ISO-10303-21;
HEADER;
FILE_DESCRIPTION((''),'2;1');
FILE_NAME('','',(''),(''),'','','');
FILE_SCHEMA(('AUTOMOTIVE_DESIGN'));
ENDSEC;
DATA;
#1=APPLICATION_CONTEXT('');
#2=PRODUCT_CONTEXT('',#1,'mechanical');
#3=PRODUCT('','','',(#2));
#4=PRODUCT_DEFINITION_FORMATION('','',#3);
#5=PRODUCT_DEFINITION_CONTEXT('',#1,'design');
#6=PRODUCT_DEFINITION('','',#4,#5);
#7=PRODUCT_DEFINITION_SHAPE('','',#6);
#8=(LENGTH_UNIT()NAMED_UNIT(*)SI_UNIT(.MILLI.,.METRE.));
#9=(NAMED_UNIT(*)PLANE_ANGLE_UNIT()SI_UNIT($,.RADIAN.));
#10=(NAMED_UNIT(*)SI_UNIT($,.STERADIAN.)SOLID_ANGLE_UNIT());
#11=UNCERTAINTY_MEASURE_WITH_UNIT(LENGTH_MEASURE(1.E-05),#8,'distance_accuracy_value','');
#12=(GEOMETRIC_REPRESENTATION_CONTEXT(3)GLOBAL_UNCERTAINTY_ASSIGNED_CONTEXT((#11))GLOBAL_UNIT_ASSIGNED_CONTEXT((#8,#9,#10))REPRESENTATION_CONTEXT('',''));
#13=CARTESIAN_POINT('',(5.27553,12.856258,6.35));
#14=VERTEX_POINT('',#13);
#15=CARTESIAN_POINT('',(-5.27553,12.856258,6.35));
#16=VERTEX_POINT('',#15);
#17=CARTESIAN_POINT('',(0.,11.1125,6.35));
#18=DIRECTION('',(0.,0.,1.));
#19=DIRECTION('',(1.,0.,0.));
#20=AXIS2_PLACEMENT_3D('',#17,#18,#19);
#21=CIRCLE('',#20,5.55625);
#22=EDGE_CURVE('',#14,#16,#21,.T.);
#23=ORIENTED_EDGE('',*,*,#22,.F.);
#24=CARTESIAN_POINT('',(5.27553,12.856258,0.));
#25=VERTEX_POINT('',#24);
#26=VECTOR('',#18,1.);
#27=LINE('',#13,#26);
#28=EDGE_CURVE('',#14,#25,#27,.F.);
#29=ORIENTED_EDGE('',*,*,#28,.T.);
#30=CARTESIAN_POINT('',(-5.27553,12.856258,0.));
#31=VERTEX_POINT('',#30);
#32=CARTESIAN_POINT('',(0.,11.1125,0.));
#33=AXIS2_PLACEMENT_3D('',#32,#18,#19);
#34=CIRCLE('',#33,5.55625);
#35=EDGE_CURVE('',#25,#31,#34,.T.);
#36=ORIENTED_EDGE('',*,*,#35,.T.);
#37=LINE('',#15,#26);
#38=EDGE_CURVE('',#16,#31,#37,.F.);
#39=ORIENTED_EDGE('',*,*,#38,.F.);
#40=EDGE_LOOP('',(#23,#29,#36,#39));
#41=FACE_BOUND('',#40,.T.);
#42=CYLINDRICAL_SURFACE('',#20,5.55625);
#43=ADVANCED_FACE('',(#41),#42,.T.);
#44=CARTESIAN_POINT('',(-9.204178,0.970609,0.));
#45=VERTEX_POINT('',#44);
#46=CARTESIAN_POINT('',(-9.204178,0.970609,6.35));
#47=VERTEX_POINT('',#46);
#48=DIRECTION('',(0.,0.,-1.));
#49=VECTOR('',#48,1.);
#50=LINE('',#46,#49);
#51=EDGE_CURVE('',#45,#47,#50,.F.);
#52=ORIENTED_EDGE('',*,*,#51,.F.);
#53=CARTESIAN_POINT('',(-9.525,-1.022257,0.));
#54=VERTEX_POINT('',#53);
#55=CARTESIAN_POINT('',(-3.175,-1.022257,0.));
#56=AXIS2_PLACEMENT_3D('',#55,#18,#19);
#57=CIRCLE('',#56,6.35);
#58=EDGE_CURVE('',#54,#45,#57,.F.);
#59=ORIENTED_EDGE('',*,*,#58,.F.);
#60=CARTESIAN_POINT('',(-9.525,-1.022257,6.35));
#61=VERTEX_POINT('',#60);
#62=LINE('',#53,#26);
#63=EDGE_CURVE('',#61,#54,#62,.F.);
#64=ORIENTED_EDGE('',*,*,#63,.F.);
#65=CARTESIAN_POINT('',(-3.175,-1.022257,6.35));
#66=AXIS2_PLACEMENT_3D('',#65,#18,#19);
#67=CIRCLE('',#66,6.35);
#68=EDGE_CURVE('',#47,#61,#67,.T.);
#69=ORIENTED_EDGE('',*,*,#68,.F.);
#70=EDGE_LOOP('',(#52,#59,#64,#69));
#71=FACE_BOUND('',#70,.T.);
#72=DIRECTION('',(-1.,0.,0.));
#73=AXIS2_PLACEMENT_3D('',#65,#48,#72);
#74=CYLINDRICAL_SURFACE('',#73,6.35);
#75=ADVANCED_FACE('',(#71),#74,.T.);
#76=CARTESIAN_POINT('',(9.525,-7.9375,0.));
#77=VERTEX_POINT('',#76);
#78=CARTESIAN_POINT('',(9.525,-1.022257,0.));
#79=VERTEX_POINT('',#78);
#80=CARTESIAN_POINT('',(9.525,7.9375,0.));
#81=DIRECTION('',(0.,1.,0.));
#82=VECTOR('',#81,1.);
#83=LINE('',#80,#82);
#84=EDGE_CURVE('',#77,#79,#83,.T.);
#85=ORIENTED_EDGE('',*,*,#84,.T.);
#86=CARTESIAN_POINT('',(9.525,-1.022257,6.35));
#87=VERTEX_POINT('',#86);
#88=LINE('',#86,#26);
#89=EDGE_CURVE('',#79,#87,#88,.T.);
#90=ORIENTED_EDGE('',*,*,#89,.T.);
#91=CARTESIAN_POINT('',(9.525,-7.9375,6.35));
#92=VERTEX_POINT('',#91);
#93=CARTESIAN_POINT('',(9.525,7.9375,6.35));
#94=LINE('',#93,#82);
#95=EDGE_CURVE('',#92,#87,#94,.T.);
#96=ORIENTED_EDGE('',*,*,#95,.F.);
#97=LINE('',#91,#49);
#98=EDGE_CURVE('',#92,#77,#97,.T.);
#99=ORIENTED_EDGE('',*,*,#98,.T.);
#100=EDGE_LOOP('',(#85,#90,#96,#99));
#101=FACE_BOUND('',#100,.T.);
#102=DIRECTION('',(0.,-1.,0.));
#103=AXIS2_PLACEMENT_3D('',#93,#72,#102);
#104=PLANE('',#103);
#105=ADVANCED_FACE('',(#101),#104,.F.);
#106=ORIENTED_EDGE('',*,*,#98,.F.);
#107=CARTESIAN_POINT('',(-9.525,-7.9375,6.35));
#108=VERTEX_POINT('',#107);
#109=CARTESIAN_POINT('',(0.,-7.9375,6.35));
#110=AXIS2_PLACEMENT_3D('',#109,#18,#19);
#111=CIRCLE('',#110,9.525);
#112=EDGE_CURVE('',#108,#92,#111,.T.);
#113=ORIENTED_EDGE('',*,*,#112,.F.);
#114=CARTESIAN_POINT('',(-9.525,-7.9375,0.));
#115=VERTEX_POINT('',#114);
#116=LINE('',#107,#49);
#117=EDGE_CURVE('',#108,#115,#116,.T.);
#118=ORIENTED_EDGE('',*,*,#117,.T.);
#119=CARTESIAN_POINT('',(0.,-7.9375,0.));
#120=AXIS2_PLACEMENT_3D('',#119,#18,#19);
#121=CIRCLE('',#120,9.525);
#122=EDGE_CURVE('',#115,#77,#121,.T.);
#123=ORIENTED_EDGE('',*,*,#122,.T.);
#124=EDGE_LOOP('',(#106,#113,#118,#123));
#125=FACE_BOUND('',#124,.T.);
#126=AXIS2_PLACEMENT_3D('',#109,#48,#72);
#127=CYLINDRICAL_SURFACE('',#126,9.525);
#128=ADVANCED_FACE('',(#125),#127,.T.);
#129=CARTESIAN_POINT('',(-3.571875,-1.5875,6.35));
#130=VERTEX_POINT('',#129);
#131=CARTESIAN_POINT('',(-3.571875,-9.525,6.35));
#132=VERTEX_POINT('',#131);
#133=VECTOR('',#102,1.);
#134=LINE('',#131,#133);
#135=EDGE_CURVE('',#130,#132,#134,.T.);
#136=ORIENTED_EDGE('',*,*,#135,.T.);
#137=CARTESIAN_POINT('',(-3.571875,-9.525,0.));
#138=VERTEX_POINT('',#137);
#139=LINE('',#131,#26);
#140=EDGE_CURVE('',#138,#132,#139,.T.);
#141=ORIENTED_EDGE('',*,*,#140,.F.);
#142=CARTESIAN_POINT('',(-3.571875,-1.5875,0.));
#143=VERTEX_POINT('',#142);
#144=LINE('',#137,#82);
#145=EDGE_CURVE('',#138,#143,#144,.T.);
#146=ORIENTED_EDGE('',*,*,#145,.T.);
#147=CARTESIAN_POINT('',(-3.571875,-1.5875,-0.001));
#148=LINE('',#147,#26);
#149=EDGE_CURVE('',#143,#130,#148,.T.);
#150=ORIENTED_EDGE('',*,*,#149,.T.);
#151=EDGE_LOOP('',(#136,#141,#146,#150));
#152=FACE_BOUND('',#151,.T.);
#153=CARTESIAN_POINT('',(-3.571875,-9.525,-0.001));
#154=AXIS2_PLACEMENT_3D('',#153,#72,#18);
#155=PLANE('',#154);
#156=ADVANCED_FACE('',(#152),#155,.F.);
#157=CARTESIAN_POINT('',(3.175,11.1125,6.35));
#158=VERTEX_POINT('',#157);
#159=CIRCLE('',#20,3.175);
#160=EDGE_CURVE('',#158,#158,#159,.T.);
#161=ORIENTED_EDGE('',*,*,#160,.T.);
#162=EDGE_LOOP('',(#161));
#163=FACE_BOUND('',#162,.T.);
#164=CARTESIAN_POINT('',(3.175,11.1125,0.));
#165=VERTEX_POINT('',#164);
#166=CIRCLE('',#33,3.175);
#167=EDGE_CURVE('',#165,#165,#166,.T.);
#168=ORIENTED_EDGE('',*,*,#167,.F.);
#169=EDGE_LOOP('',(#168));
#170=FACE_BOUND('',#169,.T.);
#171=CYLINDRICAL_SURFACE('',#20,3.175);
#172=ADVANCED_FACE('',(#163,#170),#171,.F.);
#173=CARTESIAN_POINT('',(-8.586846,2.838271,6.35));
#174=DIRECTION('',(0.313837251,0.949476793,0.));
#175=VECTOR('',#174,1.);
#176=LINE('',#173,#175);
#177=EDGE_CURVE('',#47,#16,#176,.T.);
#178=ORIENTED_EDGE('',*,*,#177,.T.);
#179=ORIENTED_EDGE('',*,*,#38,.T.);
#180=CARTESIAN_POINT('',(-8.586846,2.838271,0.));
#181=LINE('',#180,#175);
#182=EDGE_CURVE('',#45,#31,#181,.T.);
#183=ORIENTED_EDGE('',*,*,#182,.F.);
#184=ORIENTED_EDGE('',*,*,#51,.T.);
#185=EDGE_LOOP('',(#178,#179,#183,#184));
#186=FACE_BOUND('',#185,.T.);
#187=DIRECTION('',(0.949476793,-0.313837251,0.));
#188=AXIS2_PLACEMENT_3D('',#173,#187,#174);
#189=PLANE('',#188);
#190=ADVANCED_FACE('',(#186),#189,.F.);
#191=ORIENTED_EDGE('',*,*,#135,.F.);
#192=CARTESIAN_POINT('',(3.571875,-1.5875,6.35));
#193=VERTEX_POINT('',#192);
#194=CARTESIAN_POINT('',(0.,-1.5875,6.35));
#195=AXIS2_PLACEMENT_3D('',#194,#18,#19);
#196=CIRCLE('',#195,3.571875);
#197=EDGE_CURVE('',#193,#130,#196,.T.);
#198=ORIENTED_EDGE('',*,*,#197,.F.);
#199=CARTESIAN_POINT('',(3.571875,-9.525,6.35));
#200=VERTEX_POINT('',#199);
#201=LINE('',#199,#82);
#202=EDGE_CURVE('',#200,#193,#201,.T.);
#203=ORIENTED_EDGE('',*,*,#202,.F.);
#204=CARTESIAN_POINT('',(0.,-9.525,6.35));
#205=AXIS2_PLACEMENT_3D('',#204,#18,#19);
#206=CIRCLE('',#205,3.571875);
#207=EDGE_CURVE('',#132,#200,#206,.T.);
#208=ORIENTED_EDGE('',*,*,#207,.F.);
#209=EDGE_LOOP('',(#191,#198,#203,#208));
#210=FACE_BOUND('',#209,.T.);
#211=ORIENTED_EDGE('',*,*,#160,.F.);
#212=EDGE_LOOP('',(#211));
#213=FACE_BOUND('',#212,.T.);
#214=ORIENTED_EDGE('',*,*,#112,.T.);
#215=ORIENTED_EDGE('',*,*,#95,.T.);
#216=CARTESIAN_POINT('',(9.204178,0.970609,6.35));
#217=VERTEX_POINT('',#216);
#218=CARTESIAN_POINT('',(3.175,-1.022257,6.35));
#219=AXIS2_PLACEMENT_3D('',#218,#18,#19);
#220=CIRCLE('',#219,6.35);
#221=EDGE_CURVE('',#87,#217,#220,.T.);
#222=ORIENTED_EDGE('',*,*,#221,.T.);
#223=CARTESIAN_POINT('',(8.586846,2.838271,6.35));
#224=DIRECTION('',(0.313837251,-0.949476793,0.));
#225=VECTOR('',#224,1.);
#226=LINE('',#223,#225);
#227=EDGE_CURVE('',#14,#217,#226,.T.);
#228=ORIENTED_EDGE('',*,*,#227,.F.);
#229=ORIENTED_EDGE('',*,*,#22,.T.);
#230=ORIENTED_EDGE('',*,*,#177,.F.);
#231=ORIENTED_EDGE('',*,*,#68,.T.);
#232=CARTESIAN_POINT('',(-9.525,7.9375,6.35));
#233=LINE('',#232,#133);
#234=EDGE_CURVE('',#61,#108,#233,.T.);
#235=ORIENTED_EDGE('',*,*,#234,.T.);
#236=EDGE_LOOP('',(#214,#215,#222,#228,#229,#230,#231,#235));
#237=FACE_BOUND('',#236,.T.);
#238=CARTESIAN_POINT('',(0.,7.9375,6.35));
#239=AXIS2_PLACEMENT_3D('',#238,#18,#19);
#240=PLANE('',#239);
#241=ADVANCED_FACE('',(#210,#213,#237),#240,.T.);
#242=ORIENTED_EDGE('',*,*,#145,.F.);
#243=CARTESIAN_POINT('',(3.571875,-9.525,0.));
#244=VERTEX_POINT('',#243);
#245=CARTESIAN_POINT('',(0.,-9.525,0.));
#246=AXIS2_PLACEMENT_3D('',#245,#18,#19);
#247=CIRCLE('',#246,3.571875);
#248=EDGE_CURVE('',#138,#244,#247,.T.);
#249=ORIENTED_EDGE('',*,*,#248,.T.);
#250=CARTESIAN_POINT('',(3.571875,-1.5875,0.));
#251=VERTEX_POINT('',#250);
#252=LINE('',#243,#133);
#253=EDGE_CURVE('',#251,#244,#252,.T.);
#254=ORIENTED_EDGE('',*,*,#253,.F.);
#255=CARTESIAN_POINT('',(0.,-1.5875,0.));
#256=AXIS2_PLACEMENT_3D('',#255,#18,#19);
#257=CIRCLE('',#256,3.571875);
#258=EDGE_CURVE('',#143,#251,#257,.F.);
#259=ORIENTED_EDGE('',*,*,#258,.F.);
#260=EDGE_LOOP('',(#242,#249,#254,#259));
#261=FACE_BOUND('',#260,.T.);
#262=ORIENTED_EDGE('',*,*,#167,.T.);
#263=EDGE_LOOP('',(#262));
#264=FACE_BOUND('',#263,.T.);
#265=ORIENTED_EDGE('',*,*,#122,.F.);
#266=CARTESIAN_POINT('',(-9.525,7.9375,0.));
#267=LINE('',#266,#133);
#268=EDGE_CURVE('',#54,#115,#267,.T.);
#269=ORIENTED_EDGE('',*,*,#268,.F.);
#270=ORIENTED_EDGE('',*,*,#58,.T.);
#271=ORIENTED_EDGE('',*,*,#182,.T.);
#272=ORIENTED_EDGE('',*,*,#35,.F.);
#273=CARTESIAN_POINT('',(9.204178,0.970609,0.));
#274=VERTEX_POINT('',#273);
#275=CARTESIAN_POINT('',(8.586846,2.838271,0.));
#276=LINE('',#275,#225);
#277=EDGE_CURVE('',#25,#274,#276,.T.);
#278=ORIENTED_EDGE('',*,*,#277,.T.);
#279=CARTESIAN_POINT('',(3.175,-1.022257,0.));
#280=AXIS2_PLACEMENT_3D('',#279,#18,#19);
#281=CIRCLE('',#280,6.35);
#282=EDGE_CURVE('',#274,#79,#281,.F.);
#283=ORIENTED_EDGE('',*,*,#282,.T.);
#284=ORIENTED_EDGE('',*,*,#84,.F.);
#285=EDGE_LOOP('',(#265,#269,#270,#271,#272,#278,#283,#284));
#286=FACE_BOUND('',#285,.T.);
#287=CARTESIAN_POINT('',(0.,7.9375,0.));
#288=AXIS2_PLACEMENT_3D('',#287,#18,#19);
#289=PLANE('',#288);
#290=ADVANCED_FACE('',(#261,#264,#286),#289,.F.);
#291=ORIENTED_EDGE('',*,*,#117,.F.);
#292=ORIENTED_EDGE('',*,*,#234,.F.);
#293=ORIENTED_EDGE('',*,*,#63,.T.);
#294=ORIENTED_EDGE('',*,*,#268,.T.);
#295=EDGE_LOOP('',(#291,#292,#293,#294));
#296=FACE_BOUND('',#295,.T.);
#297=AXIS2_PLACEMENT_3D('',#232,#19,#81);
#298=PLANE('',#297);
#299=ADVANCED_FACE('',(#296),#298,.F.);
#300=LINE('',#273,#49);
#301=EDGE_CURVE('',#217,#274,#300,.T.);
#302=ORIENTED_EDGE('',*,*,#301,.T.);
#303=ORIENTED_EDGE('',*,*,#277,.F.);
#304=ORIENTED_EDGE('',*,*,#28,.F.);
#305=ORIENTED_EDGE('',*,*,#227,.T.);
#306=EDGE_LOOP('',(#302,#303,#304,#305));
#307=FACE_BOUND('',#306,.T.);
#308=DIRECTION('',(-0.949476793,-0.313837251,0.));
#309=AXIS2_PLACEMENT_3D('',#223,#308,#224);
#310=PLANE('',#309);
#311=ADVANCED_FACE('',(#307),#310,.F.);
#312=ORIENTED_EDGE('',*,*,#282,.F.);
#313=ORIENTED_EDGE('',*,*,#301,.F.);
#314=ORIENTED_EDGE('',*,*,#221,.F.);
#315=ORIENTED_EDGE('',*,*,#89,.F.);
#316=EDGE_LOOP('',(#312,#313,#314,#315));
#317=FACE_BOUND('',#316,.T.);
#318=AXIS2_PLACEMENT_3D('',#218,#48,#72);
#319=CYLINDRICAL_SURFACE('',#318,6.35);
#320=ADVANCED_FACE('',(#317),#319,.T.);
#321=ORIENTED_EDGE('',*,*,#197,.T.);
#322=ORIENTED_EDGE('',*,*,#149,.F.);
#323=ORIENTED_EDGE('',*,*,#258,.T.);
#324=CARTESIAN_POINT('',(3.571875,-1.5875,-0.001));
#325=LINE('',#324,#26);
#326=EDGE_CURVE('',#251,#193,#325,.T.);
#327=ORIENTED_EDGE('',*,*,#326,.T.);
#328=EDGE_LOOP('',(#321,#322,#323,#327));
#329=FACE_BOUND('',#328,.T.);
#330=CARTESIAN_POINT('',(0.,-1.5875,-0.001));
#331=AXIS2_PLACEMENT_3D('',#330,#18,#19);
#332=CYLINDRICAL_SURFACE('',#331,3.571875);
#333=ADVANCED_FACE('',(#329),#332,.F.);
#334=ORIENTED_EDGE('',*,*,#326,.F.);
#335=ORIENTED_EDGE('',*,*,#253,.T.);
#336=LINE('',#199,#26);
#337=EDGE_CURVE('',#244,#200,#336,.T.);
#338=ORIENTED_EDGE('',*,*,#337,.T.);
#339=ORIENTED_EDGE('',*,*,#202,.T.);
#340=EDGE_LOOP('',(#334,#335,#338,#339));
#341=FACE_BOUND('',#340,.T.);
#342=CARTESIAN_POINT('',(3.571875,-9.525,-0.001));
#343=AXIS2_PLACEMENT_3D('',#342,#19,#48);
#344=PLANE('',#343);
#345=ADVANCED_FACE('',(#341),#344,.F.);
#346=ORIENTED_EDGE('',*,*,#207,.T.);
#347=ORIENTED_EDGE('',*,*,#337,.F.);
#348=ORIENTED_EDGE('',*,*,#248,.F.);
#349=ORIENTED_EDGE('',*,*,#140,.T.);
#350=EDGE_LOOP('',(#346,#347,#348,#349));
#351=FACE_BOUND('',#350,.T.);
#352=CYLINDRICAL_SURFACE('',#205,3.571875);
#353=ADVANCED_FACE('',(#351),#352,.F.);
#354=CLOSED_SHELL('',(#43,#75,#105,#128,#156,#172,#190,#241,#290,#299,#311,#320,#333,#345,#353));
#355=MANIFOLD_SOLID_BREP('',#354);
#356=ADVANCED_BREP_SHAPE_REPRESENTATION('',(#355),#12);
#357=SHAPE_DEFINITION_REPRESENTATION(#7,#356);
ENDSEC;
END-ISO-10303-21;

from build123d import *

# Parameters (mm, degrees)
BASE_FLANGE1_DEPTH              = 6.35
F_1_4_0_25_DIAMETER_HOLE1_D     = 6.35
F_9_32_0_28125_DIAMETER_HOLE1_D = 7.14375
CUT_EXTRUDE1_REACH              = 22.88
CUT_EXTRUDE2_DEPTH              = 21.88030247
FILLET1_R                       = 6.35


# Sheet-metal steps are written as plain solids
with BuildPart() as part:
    # Sketch1 → Base-Flange1 (new body)
    with BuildSketch(Plane.XY):
        with BuildLine():
            Line((9.525, 7.9375), (9.525, -7.9375))
            ThreePointArc((9.525, -7.9375), (0, -17.4625), (-9.525, -7.9375))
            Line((-9.525, -7.9375), (-9.525, 7.9375))
            ThreePointArc((-9.525, 7.9375), (0, 17.4625), (9.525, 7.9375))
        make_face()
    extrude(amount=BASE_FLANGE1_DEPTH)

    # 1/4 (0.25) Diameter Hole1 (through all)
    with Locations(Plane.XY.offset(6.35)):
        with Locations((0, 11.1125)):
            Hole(F_1_4_0_25_DIAMETER_HOLE1_D / 2)

    # 9/32 (0.28125) Diameter Hole1 (through all)
    with Locations(Plane.XY.offset(6.35)):
        with Locations((0, -9.525)):
            Hole(F_9_32_0_28125_DIAMETER_HOLE1_D / 2)

    # Sketch6 → Cut-Extrude1 (cut, up to next)
    with BuildSketch(Plane.XY.offset(6.35), mode=Mode.PRIVATE) as cut_extrude1_sk1:
        with BuildLine():
            Line((-3.571875, -9.525), (-3.571875, -1.5875))
            ThreePointArc((-3.571875, -1.5875), (0, 1.984375), (3.571875, -1.5875))
            Line((3.571875, -1.5875), (3.571875, -9.525))
            ThreePointArc((3.571875, -9.525), (0, -13.096875), (-3.571875, -9.525))
        make_face()
    cut_extrude1_tool1 = extrude(cut_extrude1_sk1.sketch, amount=-CUT_EXTRUDE1_REACH, mode=Mode.PRIVATE) & part.part
    add(cut_extrude1_tool1.solids().sort_by_distance((0, -5.55625, 6.35))[0], mode=Mode.SUBTRACT)

    # Sketch7 → Cut-Extrude2 (cut, through all)
    with BuildSketch(Plane.XY.offset(6.35)):
        with BuildLine():
            Line((-4.336848919, 16.417910748), (-9.525, 0))
            Line((-9.525, 0), (-5.27553043, 12.856258225))
            ThreePointArc((-5.27553043, 12.856258225), (-3.89412581, 15.075793862), (-1.650615296, 16.417910748))
            Line((-1.650615296, 16.417910748), (-4.336848919, 16.417910748))
        make_face()
        with BuildLine():
            ThreePointArc((1.650615296, 16.417910748), (3.89412581, 15.075793862), (5.27553043, 12.856258225))
            Line((5.27553043, 12.856258225), (9.525, 0))
            Line((9.525, 0), (4.336848919, 16.417910748))
            Line((4.336848919, 16.417910748), (1.650615296, 16.417910748))
        make_face()
        with BuildLine():
            ThreePointArc((9.525, 7.9375), (8.125088029, 12.908271522), (4.336848919, 16.417910748))
            Line((4.336848919, 16.417910748), (9.525, 0))
            Line((9.525, 0), (9.525, 7.9375))
        make_face()
        with BuildLine():
            Line((-9.525, 7.9375), (-9.525, 0))
            Line((-9.525, 0), (-4.336848919, 16.417910748))
            ThreePointArc((-4.336848919, 16.417910748), (-8.125088029, 12.908271522), (-9.525, 7.9375))
        make_face()
        with BuildLine():
            ThreePointArc((-1e-09, 17.4625), (-2.230438592, 17.197671094), (-4.336848919, 16.417910748))
            Line((-4.336848919, 16.417910748), (-1.650615296, 16.417910748))
            ThreePointArc((-1.650615296, 16.417910748), (0, 16.66875), (1.650615296, 16.417910748))
            Line((1.650615296, 16.417910748), (4.336848919, 16.417910748))
            ThreePointArc((4.336848919, 16.417910748), (2.230438592, 17.197671094), (-1e-09, 17.4625))
        make_face()
    extrude(amount=-CUT_EXTRUDE2_DEPTH, mode=Mode.SUBTRACT)

    # Fillet1
    fillet1_edges = [part.edges().sort_by_distance(p)[0] for p in [
        (9.525, 0, 3.175),
        (-9.525, 0, 3.175),
    ]]
    fillet(fillet1_edges, radius=FILLET1_R)


solid = part.part
